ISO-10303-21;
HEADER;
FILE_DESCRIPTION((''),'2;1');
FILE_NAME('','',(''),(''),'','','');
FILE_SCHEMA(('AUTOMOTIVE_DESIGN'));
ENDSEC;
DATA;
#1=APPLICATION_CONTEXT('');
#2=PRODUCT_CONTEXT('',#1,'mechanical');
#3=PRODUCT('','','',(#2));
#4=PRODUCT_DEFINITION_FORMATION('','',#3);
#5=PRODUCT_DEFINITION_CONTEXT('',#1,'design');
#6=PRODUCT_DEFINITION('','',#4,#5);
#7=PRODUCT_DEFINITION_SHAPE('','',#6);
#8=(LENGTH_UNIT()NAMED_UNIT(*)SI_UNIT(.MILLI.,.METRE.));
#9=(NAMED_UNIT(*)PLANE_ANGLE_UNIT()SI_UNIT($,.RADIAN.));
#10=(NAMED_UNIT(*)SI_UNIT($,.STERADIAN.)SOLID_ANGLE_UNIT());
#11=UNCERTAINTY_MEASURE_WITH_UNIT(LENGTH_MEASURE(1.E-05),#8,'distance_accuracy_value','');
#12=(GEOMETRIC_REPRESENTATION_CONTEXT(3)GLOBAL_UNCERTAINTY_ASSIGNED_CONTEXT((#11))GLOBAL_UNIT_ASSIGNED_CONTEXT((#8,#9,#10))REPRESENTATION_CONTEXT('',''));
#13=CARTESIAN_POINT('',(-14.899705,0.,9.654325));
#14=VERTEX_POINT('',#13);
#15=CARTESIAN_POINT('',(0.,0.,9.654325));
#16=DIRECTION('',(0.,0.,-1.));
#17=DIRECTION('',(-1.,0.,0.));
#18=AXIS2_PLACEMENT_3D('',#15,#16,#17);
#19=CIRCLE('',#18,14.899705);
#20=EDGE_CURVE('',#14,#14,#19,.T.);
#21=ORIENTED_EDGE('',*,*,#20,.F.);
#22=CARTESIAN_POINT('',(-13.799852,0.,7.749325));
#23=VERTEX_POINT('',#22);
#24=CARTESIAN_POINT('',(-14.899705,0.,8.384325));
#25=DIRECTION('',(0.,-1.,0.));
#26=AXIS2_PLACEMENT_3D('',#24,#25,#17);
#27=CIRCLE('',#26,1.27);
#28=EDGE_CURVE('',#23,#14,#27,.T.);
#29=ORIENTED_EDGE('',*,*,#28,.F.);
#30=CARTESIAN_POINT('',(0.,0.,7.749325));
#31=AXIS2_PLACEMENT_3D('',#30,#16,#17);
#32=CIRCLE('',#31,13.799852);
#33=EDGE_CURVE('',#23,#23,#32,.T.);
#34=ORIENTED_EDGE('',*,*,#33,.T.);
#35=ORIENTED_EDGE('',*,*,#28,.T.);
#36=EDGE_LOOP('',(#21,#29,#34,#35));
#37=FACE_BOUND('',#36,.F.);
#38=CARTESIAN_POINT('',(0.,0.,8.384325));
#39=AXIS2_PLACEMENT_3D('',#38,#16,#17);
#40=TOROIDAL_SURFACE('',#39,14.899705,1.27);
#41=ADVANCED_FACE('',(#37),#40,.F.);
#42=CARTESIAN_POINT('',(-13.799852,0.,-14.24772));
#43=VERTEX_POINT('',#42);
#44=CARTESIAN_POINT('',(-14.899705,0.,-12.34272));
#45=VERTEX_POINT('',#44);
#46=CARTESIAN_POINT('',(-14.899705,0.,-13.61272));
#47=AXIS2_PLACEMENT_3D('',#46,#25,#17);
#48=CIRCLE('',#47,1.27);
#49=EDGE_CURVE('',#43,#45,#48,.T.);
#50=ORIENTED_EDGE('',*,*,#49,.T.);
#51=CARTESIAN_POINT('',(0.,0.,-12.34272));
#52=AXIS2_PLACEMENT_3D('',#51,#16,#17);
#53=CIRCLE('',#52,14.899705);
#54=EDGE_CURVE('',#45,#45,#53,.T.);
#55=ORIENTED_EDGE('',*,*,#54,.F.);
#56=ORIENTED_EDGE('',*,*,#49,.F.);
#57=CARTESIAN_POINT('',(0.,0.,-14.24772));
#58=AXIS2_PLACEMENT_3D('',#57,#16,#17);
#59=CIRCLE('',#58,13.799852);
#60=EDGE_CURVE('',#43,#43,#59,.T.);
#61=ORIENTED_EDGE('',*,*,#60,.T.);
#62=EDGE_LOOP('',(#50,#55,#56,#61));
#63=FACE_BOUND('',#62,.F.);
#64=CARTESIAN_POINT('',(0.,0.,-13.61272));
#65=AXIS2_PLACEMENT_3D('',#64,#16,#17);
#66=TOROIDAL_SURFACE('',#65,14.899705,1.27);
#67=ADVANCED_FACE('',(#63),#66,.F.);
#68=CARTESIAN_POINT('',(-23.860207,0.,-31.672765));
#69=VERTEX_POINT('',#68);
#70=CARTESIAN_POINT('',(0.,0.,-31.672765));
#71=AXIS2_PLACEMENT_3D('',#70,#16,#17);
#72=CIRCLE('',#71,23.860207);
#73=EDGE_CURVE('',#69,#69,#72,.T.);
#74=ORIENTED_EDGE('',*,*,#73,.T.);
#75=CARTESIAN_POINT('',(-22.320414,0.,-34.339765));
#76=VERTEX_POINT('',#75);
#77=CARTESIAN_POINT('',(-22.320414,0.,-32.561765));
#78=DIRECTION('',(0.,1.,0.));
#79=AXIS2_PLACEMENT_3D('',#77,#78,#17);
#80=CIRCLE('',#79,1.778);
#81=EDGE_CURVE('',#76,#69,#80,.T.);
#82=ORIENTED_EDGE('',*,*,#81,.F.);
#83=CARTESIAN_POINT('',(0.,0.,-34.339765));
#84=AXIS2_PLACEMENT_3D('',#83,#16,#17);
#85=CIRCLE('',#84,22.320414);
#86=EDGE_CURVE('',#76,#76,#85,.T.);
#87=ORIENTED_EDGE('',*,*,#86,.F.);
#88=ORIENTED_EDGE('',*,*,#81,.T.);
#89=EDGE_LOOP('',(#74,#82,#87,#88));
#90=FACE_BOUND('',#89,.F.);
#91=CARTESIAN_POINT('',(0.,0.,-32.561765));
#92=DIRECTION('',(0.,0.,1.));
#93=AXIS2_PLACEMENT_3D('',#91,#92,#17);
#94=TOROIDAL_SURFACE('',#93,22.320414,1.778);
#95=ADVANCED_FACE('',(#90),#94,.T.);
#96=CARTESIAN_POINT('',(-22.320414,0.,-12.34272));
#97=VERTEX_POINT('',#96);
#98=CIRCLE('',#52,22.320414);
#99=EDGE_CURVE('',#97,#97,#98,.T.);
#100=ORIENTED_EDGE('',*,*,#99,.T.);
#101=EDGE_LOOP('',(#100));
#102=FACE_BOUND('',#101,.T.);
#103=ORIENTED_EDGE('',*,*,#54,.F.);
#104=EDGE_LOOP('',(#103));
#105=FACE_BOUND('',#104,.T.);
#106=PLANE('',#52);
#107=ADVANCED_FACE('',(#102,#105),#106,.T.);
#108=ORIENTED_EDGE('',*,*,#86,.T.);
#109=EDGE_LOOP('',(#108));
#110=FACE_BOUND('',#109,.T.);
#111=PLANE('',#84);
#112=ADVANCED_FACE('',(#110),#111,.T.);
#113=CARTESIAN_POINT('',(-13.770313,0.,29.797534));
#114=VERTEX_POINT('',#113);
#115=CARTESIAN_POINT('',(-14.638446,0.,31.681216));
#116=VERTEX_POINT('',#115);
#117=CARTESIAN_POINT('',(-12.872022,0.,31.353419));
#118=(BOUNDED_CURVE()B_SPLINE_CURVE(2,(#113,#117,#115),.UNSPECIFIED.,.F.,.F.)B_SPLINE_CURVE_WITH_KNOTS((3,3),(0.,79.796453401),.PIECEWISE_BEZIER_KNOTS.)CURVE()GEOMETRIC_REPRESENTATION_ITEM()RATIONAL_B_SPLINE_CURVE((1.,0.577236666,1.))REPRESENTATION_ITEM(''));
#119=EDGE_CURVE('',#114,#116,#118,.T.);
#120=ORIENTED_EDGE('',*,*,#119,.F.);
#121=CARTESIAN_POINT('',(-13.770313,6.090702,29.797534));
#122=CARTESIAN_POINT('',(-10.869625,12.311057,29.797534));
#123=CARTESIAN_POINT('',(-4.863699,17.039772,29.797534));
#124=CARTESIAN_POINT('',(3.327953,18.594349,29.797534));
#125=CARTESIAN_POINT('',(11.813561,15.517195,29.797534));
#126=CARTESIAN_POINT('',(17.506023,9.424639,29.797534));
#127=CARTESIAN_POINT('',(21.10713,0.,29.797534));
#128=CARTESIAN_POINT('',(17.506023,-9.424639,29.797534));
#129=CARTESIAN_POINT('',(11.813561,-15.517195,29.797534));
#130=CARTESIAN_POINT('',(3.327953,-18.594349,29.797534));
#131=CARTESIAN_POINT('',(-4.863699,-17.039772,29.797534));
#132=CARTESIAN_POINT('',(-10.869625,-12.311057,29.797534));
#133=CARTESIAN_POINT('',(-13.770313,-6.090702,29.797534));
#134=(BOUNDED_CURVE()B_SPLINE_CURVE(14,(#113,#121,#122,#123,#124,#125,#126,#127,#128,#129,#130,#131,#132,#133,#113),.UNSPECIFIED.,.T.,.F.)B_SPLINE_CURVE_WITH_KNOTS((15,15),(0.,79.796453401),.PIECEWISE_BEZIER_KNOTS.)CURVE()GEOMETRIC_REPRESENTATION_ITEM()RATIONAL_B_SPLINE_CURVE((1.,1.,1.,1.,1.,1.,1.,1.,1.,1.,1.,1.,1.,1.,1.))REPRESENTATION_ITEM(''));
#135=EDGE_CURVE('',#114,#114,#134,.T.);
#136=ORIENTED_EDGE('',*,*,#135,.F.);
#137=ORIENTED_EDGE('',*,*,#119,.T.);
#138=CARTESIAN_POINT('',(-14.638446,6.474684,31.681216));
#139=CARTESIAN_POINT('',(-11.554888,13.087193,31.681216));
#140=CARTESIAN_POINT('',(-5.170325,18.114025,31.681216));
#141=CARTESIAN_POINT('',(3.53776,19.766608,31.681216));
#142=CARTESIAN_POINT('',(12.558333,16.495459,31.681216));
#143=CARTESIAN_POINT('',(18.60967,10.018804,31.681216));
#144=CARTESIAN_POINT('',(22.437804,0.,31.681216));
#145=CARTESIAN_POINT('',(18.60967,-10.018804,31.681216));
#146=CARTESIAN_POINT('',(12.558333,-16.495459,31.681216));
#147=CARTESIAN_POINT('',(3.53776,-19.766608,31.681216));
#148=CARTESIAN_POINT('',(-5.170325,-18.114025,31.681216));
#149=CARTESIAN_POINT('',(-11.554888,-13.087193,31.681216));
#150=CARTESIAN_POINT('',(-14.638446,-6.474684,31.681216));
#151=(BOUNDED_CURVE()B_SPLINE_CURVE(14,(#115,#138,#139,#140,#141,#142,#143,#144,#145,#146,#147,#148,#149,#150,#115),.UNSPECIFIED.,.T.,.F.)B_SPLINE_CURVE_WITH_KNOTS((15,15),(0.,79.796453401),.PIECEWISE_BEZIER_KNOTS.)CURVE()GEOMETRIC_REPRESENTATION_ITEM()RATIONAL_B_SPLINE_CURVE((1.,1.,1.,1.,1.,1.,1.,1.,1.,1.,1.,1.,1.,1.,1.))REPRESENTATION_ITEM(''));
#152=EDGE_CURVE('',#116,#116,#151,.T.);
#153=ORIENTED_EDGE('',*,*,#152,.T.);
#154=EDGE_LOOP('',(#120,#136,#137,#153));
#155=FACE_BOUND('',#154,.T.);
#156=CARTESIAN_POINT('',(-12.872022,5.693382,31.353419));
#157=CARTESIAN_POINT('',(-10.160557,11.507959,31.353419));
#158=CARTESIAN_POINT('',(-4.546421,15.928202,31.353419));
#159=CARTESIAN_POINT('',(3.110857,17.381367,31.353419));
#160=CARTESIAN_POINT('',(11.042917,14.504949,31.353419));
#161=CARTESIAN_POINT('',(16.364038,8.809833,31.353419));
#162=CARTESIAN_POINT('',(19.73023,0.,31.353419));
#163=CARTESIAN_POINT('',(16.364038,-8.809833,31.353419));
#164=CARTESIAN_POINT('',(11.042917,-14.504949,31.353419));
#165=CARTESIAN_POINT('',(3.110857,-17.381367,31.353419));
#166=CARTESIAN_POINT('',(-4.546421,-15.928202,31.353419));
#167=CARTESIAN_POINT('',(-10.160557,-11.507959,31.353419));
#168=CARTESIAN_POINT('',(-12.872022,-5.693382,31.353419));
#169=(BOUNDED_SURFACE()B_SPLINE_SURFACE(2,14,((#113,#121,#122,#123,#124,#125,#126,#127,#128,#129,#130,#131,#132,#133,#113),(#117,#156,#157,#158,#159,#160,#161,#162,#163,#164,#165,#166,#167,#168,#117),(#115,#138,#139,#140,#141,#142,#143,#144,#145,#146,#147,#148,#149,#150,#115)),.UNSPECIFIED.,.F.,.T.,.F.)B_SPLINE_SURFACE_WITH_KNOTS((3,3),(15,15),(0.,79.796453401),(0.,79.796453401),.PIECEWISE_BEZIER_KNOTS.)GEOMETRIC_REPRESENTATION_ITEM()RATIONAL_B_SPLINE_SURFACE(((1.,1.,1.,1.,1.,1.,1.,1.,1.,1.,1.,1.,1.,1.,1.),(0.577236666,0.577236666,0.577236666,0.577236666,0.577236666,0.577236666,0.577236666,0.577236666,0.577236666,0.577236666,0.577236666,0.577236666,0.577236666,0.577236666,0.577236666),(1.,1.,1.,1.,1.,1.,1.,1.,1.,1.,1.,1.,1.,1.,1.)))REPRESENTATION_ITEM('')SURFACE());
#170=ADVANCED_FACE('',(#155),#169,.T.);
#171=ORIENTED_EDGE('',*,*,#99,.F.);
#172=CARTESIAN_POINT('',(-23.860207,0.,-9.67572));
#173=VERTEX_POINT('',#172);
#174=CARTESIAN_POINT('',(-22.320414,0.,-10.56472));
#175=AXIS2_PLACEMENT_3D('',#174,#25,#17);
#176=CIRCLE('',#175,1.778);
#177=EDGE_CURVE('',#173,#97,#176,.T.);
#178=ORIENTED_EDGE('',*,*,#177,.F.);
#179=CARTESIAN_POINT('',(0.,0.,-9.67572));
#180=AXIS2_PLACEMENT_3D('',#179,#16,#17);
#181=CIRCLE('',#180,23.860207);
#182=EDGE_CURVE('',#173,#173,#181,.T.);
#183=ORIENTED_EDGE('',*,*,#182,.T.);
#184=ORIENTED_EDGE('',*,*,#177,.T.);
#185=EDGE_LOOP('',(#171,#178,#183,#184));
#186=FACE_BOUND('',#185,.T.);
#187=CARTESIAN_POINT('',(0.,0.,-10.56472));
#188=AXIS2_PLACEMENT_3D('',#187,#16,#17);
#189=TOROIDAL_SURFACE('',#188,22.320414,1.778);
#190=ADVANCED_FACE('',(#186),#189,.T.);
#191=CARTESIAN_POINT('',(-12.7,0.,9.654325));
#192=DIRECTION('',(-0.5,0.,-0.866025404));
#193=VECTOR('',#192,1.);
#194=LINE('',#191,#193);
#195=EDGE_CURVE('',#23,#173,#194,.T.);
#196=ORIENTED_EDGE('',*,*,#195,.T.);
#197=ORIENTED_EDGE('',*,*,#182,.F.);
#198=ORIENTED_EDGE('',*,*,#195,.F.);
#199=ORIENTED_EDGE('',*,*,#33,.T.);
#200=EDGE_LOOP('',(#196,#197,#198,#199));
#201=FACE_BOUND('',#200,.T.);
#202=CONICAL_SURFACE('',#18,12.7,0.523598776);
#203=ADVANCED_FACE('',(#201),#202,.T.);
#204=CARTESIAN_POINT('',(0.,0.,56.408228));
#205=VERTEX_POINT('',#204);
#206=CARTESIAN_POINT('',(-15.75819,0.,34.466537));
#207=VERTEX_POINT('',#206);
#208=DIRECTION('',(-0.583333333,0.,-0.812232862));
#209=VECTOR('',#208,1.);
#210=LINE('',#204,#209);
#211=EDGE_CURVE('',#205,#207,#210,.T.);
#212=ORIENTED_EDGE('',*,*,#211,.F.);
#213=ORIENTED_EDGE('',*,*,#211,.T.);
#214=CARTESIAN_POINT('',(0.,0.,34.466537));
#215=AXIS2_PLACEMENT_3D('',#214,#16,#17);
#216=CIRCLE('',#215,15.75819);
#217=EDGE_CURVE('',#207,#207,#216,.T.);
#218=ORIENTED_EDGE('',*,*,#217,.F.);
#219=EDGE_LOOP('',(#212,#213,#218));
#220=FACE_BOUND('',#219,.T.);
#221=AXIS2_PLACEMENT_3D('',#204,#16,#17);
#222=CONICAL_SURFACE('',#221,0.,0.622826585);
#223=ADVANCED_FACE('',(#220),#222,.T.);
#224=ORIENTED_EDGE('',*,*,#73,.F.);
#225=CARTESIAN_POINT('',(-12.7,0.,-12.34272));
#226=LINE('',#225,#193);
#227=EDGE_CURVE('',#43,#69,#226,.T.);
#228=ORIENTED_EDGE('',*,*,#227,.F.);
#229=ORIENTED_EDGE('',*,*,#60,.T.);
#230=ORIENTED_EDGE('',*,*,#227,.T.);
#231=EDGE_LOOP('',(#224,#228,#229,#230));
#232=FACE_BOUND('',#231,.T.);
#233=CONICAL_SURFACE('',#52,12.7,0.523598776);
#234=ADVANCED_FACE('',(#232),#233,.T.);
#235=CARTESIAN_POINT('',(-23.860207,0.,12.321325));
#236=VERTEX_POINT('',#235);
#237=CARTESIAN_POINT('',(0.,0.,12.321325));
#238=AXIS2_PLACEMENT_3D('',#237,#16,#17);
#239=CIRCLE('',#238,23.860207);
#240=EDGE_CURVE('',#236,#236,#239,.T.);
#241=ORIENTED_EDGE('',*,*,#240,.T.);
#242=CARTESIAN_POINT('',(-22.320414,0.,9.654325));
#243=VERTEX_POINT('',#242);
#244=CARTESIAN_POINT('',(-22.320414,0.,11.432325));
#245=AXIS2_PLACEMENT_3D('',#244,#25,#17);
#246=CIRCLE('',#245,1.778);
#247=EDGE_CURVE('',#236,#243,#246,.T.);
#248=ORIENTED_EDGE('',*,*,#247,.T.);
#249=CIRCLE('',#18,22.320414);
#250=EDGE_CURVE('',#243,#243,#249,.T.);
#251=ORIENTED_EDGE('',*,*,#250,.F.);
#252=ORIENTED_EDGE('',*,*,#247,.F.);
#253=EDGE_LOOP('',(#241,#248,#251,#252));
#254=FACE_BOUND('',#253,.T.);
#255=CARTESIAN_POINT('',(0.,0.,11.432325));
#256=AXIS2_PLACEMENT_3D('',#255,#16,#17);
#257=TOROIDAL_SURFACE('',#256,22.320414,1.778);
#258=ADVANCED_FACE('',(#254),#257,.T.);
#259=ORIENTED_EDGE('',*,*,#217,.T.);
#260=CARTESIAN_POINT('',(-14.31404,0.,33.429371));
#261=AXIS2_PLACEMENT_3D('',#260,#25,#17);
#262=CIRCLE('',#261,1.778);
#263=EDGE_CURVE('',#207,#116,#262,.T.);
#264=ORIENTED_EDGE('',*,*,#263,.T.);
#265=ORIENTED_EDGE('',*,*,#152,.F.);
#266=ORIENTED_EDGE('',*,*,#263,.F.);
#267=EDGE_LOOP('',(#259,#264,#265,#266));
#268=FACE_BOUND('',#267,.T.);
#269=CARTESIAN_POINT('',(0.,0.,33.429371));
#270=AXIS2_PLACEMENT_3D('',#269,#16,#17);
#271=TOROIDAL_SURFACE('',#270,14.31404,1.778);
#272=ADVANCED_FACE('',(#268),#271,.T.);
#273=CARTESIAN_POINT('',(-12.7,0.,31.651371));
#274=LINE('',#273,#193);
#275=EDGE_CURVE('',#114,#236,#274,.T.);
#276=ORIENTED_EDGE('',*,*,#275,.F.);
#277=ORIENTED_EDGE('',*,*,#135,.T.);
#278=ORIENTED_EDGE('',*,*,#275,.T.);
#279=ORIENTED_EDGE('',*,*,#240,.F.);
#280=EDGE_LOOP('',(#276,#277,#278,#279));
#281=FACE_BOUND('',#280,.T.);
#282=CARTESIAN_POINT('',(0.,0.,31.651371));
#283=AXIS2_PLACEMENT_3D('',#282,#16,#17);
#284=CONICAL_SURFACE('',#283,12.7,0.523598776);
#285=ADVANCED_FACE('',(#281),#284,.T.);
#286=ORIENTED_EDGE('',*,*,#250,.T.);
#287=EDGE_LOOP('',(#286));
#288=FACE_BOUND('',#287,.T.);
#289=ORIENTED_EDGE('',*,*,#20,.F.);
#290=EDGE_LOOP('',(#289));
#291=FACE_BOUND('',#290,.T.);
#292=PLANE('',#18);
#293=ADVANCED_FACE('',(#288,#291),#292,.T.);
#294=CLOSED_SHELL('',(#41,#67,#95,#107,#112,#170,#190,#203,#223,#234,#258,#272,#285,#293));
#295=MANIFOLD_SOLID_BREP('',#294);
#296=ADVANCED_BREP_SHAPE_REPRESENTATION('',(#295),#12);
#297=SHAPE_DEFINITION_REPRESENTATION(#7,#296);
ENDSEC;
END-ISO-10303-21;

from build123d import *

# Parameters (mm, degrees)
F2_R = 1.778
F3_R = 1.27


# Not quite as in the source:
# - a feature names something its author has since deleted; it is built from what else it names


with BuildPart() as f1:
    # F0 (on Front) → F1 (revolve)
    with BuildSketch(Plane.XZ):
        Polygon((-25.4, -34.3397652524), (0, -34.3397652524), (0, 56.4082281518), (-17.78, 31.651370516), (-12.7, 31.651370516), (-25.4, 9.6543252599), (-12.7, 9.6543252599), (-25.4, -12.3427199963), (-12.7, -12.3427199963), align=None)
    revolve(axis=Axis((0, 0, 11.0342314497), (0, 0, -1)))

    # F2
    f2_edges = [f1.edges().sort_by_distance(p)[0] for p in [
        (17.78, 0, 31.651371),
        (25.4, 0, 9.654325),
        (25.4, 0, -12.34272),
        (25.4, 0, -34.339765),
    ]]
    fillet(f2_edges, radius=F2_R)

    # F3
    f3_edges = [f1.edges().sort_by_distance(p)[0] for p in [
        (12.7, 0, 31.651371),
        (12.7, 0, -12.34272),
        (12.7, 0, 9.654325),
    ]]
    fillet(f3_edges, radius=F3_R)


solid = f1.part
